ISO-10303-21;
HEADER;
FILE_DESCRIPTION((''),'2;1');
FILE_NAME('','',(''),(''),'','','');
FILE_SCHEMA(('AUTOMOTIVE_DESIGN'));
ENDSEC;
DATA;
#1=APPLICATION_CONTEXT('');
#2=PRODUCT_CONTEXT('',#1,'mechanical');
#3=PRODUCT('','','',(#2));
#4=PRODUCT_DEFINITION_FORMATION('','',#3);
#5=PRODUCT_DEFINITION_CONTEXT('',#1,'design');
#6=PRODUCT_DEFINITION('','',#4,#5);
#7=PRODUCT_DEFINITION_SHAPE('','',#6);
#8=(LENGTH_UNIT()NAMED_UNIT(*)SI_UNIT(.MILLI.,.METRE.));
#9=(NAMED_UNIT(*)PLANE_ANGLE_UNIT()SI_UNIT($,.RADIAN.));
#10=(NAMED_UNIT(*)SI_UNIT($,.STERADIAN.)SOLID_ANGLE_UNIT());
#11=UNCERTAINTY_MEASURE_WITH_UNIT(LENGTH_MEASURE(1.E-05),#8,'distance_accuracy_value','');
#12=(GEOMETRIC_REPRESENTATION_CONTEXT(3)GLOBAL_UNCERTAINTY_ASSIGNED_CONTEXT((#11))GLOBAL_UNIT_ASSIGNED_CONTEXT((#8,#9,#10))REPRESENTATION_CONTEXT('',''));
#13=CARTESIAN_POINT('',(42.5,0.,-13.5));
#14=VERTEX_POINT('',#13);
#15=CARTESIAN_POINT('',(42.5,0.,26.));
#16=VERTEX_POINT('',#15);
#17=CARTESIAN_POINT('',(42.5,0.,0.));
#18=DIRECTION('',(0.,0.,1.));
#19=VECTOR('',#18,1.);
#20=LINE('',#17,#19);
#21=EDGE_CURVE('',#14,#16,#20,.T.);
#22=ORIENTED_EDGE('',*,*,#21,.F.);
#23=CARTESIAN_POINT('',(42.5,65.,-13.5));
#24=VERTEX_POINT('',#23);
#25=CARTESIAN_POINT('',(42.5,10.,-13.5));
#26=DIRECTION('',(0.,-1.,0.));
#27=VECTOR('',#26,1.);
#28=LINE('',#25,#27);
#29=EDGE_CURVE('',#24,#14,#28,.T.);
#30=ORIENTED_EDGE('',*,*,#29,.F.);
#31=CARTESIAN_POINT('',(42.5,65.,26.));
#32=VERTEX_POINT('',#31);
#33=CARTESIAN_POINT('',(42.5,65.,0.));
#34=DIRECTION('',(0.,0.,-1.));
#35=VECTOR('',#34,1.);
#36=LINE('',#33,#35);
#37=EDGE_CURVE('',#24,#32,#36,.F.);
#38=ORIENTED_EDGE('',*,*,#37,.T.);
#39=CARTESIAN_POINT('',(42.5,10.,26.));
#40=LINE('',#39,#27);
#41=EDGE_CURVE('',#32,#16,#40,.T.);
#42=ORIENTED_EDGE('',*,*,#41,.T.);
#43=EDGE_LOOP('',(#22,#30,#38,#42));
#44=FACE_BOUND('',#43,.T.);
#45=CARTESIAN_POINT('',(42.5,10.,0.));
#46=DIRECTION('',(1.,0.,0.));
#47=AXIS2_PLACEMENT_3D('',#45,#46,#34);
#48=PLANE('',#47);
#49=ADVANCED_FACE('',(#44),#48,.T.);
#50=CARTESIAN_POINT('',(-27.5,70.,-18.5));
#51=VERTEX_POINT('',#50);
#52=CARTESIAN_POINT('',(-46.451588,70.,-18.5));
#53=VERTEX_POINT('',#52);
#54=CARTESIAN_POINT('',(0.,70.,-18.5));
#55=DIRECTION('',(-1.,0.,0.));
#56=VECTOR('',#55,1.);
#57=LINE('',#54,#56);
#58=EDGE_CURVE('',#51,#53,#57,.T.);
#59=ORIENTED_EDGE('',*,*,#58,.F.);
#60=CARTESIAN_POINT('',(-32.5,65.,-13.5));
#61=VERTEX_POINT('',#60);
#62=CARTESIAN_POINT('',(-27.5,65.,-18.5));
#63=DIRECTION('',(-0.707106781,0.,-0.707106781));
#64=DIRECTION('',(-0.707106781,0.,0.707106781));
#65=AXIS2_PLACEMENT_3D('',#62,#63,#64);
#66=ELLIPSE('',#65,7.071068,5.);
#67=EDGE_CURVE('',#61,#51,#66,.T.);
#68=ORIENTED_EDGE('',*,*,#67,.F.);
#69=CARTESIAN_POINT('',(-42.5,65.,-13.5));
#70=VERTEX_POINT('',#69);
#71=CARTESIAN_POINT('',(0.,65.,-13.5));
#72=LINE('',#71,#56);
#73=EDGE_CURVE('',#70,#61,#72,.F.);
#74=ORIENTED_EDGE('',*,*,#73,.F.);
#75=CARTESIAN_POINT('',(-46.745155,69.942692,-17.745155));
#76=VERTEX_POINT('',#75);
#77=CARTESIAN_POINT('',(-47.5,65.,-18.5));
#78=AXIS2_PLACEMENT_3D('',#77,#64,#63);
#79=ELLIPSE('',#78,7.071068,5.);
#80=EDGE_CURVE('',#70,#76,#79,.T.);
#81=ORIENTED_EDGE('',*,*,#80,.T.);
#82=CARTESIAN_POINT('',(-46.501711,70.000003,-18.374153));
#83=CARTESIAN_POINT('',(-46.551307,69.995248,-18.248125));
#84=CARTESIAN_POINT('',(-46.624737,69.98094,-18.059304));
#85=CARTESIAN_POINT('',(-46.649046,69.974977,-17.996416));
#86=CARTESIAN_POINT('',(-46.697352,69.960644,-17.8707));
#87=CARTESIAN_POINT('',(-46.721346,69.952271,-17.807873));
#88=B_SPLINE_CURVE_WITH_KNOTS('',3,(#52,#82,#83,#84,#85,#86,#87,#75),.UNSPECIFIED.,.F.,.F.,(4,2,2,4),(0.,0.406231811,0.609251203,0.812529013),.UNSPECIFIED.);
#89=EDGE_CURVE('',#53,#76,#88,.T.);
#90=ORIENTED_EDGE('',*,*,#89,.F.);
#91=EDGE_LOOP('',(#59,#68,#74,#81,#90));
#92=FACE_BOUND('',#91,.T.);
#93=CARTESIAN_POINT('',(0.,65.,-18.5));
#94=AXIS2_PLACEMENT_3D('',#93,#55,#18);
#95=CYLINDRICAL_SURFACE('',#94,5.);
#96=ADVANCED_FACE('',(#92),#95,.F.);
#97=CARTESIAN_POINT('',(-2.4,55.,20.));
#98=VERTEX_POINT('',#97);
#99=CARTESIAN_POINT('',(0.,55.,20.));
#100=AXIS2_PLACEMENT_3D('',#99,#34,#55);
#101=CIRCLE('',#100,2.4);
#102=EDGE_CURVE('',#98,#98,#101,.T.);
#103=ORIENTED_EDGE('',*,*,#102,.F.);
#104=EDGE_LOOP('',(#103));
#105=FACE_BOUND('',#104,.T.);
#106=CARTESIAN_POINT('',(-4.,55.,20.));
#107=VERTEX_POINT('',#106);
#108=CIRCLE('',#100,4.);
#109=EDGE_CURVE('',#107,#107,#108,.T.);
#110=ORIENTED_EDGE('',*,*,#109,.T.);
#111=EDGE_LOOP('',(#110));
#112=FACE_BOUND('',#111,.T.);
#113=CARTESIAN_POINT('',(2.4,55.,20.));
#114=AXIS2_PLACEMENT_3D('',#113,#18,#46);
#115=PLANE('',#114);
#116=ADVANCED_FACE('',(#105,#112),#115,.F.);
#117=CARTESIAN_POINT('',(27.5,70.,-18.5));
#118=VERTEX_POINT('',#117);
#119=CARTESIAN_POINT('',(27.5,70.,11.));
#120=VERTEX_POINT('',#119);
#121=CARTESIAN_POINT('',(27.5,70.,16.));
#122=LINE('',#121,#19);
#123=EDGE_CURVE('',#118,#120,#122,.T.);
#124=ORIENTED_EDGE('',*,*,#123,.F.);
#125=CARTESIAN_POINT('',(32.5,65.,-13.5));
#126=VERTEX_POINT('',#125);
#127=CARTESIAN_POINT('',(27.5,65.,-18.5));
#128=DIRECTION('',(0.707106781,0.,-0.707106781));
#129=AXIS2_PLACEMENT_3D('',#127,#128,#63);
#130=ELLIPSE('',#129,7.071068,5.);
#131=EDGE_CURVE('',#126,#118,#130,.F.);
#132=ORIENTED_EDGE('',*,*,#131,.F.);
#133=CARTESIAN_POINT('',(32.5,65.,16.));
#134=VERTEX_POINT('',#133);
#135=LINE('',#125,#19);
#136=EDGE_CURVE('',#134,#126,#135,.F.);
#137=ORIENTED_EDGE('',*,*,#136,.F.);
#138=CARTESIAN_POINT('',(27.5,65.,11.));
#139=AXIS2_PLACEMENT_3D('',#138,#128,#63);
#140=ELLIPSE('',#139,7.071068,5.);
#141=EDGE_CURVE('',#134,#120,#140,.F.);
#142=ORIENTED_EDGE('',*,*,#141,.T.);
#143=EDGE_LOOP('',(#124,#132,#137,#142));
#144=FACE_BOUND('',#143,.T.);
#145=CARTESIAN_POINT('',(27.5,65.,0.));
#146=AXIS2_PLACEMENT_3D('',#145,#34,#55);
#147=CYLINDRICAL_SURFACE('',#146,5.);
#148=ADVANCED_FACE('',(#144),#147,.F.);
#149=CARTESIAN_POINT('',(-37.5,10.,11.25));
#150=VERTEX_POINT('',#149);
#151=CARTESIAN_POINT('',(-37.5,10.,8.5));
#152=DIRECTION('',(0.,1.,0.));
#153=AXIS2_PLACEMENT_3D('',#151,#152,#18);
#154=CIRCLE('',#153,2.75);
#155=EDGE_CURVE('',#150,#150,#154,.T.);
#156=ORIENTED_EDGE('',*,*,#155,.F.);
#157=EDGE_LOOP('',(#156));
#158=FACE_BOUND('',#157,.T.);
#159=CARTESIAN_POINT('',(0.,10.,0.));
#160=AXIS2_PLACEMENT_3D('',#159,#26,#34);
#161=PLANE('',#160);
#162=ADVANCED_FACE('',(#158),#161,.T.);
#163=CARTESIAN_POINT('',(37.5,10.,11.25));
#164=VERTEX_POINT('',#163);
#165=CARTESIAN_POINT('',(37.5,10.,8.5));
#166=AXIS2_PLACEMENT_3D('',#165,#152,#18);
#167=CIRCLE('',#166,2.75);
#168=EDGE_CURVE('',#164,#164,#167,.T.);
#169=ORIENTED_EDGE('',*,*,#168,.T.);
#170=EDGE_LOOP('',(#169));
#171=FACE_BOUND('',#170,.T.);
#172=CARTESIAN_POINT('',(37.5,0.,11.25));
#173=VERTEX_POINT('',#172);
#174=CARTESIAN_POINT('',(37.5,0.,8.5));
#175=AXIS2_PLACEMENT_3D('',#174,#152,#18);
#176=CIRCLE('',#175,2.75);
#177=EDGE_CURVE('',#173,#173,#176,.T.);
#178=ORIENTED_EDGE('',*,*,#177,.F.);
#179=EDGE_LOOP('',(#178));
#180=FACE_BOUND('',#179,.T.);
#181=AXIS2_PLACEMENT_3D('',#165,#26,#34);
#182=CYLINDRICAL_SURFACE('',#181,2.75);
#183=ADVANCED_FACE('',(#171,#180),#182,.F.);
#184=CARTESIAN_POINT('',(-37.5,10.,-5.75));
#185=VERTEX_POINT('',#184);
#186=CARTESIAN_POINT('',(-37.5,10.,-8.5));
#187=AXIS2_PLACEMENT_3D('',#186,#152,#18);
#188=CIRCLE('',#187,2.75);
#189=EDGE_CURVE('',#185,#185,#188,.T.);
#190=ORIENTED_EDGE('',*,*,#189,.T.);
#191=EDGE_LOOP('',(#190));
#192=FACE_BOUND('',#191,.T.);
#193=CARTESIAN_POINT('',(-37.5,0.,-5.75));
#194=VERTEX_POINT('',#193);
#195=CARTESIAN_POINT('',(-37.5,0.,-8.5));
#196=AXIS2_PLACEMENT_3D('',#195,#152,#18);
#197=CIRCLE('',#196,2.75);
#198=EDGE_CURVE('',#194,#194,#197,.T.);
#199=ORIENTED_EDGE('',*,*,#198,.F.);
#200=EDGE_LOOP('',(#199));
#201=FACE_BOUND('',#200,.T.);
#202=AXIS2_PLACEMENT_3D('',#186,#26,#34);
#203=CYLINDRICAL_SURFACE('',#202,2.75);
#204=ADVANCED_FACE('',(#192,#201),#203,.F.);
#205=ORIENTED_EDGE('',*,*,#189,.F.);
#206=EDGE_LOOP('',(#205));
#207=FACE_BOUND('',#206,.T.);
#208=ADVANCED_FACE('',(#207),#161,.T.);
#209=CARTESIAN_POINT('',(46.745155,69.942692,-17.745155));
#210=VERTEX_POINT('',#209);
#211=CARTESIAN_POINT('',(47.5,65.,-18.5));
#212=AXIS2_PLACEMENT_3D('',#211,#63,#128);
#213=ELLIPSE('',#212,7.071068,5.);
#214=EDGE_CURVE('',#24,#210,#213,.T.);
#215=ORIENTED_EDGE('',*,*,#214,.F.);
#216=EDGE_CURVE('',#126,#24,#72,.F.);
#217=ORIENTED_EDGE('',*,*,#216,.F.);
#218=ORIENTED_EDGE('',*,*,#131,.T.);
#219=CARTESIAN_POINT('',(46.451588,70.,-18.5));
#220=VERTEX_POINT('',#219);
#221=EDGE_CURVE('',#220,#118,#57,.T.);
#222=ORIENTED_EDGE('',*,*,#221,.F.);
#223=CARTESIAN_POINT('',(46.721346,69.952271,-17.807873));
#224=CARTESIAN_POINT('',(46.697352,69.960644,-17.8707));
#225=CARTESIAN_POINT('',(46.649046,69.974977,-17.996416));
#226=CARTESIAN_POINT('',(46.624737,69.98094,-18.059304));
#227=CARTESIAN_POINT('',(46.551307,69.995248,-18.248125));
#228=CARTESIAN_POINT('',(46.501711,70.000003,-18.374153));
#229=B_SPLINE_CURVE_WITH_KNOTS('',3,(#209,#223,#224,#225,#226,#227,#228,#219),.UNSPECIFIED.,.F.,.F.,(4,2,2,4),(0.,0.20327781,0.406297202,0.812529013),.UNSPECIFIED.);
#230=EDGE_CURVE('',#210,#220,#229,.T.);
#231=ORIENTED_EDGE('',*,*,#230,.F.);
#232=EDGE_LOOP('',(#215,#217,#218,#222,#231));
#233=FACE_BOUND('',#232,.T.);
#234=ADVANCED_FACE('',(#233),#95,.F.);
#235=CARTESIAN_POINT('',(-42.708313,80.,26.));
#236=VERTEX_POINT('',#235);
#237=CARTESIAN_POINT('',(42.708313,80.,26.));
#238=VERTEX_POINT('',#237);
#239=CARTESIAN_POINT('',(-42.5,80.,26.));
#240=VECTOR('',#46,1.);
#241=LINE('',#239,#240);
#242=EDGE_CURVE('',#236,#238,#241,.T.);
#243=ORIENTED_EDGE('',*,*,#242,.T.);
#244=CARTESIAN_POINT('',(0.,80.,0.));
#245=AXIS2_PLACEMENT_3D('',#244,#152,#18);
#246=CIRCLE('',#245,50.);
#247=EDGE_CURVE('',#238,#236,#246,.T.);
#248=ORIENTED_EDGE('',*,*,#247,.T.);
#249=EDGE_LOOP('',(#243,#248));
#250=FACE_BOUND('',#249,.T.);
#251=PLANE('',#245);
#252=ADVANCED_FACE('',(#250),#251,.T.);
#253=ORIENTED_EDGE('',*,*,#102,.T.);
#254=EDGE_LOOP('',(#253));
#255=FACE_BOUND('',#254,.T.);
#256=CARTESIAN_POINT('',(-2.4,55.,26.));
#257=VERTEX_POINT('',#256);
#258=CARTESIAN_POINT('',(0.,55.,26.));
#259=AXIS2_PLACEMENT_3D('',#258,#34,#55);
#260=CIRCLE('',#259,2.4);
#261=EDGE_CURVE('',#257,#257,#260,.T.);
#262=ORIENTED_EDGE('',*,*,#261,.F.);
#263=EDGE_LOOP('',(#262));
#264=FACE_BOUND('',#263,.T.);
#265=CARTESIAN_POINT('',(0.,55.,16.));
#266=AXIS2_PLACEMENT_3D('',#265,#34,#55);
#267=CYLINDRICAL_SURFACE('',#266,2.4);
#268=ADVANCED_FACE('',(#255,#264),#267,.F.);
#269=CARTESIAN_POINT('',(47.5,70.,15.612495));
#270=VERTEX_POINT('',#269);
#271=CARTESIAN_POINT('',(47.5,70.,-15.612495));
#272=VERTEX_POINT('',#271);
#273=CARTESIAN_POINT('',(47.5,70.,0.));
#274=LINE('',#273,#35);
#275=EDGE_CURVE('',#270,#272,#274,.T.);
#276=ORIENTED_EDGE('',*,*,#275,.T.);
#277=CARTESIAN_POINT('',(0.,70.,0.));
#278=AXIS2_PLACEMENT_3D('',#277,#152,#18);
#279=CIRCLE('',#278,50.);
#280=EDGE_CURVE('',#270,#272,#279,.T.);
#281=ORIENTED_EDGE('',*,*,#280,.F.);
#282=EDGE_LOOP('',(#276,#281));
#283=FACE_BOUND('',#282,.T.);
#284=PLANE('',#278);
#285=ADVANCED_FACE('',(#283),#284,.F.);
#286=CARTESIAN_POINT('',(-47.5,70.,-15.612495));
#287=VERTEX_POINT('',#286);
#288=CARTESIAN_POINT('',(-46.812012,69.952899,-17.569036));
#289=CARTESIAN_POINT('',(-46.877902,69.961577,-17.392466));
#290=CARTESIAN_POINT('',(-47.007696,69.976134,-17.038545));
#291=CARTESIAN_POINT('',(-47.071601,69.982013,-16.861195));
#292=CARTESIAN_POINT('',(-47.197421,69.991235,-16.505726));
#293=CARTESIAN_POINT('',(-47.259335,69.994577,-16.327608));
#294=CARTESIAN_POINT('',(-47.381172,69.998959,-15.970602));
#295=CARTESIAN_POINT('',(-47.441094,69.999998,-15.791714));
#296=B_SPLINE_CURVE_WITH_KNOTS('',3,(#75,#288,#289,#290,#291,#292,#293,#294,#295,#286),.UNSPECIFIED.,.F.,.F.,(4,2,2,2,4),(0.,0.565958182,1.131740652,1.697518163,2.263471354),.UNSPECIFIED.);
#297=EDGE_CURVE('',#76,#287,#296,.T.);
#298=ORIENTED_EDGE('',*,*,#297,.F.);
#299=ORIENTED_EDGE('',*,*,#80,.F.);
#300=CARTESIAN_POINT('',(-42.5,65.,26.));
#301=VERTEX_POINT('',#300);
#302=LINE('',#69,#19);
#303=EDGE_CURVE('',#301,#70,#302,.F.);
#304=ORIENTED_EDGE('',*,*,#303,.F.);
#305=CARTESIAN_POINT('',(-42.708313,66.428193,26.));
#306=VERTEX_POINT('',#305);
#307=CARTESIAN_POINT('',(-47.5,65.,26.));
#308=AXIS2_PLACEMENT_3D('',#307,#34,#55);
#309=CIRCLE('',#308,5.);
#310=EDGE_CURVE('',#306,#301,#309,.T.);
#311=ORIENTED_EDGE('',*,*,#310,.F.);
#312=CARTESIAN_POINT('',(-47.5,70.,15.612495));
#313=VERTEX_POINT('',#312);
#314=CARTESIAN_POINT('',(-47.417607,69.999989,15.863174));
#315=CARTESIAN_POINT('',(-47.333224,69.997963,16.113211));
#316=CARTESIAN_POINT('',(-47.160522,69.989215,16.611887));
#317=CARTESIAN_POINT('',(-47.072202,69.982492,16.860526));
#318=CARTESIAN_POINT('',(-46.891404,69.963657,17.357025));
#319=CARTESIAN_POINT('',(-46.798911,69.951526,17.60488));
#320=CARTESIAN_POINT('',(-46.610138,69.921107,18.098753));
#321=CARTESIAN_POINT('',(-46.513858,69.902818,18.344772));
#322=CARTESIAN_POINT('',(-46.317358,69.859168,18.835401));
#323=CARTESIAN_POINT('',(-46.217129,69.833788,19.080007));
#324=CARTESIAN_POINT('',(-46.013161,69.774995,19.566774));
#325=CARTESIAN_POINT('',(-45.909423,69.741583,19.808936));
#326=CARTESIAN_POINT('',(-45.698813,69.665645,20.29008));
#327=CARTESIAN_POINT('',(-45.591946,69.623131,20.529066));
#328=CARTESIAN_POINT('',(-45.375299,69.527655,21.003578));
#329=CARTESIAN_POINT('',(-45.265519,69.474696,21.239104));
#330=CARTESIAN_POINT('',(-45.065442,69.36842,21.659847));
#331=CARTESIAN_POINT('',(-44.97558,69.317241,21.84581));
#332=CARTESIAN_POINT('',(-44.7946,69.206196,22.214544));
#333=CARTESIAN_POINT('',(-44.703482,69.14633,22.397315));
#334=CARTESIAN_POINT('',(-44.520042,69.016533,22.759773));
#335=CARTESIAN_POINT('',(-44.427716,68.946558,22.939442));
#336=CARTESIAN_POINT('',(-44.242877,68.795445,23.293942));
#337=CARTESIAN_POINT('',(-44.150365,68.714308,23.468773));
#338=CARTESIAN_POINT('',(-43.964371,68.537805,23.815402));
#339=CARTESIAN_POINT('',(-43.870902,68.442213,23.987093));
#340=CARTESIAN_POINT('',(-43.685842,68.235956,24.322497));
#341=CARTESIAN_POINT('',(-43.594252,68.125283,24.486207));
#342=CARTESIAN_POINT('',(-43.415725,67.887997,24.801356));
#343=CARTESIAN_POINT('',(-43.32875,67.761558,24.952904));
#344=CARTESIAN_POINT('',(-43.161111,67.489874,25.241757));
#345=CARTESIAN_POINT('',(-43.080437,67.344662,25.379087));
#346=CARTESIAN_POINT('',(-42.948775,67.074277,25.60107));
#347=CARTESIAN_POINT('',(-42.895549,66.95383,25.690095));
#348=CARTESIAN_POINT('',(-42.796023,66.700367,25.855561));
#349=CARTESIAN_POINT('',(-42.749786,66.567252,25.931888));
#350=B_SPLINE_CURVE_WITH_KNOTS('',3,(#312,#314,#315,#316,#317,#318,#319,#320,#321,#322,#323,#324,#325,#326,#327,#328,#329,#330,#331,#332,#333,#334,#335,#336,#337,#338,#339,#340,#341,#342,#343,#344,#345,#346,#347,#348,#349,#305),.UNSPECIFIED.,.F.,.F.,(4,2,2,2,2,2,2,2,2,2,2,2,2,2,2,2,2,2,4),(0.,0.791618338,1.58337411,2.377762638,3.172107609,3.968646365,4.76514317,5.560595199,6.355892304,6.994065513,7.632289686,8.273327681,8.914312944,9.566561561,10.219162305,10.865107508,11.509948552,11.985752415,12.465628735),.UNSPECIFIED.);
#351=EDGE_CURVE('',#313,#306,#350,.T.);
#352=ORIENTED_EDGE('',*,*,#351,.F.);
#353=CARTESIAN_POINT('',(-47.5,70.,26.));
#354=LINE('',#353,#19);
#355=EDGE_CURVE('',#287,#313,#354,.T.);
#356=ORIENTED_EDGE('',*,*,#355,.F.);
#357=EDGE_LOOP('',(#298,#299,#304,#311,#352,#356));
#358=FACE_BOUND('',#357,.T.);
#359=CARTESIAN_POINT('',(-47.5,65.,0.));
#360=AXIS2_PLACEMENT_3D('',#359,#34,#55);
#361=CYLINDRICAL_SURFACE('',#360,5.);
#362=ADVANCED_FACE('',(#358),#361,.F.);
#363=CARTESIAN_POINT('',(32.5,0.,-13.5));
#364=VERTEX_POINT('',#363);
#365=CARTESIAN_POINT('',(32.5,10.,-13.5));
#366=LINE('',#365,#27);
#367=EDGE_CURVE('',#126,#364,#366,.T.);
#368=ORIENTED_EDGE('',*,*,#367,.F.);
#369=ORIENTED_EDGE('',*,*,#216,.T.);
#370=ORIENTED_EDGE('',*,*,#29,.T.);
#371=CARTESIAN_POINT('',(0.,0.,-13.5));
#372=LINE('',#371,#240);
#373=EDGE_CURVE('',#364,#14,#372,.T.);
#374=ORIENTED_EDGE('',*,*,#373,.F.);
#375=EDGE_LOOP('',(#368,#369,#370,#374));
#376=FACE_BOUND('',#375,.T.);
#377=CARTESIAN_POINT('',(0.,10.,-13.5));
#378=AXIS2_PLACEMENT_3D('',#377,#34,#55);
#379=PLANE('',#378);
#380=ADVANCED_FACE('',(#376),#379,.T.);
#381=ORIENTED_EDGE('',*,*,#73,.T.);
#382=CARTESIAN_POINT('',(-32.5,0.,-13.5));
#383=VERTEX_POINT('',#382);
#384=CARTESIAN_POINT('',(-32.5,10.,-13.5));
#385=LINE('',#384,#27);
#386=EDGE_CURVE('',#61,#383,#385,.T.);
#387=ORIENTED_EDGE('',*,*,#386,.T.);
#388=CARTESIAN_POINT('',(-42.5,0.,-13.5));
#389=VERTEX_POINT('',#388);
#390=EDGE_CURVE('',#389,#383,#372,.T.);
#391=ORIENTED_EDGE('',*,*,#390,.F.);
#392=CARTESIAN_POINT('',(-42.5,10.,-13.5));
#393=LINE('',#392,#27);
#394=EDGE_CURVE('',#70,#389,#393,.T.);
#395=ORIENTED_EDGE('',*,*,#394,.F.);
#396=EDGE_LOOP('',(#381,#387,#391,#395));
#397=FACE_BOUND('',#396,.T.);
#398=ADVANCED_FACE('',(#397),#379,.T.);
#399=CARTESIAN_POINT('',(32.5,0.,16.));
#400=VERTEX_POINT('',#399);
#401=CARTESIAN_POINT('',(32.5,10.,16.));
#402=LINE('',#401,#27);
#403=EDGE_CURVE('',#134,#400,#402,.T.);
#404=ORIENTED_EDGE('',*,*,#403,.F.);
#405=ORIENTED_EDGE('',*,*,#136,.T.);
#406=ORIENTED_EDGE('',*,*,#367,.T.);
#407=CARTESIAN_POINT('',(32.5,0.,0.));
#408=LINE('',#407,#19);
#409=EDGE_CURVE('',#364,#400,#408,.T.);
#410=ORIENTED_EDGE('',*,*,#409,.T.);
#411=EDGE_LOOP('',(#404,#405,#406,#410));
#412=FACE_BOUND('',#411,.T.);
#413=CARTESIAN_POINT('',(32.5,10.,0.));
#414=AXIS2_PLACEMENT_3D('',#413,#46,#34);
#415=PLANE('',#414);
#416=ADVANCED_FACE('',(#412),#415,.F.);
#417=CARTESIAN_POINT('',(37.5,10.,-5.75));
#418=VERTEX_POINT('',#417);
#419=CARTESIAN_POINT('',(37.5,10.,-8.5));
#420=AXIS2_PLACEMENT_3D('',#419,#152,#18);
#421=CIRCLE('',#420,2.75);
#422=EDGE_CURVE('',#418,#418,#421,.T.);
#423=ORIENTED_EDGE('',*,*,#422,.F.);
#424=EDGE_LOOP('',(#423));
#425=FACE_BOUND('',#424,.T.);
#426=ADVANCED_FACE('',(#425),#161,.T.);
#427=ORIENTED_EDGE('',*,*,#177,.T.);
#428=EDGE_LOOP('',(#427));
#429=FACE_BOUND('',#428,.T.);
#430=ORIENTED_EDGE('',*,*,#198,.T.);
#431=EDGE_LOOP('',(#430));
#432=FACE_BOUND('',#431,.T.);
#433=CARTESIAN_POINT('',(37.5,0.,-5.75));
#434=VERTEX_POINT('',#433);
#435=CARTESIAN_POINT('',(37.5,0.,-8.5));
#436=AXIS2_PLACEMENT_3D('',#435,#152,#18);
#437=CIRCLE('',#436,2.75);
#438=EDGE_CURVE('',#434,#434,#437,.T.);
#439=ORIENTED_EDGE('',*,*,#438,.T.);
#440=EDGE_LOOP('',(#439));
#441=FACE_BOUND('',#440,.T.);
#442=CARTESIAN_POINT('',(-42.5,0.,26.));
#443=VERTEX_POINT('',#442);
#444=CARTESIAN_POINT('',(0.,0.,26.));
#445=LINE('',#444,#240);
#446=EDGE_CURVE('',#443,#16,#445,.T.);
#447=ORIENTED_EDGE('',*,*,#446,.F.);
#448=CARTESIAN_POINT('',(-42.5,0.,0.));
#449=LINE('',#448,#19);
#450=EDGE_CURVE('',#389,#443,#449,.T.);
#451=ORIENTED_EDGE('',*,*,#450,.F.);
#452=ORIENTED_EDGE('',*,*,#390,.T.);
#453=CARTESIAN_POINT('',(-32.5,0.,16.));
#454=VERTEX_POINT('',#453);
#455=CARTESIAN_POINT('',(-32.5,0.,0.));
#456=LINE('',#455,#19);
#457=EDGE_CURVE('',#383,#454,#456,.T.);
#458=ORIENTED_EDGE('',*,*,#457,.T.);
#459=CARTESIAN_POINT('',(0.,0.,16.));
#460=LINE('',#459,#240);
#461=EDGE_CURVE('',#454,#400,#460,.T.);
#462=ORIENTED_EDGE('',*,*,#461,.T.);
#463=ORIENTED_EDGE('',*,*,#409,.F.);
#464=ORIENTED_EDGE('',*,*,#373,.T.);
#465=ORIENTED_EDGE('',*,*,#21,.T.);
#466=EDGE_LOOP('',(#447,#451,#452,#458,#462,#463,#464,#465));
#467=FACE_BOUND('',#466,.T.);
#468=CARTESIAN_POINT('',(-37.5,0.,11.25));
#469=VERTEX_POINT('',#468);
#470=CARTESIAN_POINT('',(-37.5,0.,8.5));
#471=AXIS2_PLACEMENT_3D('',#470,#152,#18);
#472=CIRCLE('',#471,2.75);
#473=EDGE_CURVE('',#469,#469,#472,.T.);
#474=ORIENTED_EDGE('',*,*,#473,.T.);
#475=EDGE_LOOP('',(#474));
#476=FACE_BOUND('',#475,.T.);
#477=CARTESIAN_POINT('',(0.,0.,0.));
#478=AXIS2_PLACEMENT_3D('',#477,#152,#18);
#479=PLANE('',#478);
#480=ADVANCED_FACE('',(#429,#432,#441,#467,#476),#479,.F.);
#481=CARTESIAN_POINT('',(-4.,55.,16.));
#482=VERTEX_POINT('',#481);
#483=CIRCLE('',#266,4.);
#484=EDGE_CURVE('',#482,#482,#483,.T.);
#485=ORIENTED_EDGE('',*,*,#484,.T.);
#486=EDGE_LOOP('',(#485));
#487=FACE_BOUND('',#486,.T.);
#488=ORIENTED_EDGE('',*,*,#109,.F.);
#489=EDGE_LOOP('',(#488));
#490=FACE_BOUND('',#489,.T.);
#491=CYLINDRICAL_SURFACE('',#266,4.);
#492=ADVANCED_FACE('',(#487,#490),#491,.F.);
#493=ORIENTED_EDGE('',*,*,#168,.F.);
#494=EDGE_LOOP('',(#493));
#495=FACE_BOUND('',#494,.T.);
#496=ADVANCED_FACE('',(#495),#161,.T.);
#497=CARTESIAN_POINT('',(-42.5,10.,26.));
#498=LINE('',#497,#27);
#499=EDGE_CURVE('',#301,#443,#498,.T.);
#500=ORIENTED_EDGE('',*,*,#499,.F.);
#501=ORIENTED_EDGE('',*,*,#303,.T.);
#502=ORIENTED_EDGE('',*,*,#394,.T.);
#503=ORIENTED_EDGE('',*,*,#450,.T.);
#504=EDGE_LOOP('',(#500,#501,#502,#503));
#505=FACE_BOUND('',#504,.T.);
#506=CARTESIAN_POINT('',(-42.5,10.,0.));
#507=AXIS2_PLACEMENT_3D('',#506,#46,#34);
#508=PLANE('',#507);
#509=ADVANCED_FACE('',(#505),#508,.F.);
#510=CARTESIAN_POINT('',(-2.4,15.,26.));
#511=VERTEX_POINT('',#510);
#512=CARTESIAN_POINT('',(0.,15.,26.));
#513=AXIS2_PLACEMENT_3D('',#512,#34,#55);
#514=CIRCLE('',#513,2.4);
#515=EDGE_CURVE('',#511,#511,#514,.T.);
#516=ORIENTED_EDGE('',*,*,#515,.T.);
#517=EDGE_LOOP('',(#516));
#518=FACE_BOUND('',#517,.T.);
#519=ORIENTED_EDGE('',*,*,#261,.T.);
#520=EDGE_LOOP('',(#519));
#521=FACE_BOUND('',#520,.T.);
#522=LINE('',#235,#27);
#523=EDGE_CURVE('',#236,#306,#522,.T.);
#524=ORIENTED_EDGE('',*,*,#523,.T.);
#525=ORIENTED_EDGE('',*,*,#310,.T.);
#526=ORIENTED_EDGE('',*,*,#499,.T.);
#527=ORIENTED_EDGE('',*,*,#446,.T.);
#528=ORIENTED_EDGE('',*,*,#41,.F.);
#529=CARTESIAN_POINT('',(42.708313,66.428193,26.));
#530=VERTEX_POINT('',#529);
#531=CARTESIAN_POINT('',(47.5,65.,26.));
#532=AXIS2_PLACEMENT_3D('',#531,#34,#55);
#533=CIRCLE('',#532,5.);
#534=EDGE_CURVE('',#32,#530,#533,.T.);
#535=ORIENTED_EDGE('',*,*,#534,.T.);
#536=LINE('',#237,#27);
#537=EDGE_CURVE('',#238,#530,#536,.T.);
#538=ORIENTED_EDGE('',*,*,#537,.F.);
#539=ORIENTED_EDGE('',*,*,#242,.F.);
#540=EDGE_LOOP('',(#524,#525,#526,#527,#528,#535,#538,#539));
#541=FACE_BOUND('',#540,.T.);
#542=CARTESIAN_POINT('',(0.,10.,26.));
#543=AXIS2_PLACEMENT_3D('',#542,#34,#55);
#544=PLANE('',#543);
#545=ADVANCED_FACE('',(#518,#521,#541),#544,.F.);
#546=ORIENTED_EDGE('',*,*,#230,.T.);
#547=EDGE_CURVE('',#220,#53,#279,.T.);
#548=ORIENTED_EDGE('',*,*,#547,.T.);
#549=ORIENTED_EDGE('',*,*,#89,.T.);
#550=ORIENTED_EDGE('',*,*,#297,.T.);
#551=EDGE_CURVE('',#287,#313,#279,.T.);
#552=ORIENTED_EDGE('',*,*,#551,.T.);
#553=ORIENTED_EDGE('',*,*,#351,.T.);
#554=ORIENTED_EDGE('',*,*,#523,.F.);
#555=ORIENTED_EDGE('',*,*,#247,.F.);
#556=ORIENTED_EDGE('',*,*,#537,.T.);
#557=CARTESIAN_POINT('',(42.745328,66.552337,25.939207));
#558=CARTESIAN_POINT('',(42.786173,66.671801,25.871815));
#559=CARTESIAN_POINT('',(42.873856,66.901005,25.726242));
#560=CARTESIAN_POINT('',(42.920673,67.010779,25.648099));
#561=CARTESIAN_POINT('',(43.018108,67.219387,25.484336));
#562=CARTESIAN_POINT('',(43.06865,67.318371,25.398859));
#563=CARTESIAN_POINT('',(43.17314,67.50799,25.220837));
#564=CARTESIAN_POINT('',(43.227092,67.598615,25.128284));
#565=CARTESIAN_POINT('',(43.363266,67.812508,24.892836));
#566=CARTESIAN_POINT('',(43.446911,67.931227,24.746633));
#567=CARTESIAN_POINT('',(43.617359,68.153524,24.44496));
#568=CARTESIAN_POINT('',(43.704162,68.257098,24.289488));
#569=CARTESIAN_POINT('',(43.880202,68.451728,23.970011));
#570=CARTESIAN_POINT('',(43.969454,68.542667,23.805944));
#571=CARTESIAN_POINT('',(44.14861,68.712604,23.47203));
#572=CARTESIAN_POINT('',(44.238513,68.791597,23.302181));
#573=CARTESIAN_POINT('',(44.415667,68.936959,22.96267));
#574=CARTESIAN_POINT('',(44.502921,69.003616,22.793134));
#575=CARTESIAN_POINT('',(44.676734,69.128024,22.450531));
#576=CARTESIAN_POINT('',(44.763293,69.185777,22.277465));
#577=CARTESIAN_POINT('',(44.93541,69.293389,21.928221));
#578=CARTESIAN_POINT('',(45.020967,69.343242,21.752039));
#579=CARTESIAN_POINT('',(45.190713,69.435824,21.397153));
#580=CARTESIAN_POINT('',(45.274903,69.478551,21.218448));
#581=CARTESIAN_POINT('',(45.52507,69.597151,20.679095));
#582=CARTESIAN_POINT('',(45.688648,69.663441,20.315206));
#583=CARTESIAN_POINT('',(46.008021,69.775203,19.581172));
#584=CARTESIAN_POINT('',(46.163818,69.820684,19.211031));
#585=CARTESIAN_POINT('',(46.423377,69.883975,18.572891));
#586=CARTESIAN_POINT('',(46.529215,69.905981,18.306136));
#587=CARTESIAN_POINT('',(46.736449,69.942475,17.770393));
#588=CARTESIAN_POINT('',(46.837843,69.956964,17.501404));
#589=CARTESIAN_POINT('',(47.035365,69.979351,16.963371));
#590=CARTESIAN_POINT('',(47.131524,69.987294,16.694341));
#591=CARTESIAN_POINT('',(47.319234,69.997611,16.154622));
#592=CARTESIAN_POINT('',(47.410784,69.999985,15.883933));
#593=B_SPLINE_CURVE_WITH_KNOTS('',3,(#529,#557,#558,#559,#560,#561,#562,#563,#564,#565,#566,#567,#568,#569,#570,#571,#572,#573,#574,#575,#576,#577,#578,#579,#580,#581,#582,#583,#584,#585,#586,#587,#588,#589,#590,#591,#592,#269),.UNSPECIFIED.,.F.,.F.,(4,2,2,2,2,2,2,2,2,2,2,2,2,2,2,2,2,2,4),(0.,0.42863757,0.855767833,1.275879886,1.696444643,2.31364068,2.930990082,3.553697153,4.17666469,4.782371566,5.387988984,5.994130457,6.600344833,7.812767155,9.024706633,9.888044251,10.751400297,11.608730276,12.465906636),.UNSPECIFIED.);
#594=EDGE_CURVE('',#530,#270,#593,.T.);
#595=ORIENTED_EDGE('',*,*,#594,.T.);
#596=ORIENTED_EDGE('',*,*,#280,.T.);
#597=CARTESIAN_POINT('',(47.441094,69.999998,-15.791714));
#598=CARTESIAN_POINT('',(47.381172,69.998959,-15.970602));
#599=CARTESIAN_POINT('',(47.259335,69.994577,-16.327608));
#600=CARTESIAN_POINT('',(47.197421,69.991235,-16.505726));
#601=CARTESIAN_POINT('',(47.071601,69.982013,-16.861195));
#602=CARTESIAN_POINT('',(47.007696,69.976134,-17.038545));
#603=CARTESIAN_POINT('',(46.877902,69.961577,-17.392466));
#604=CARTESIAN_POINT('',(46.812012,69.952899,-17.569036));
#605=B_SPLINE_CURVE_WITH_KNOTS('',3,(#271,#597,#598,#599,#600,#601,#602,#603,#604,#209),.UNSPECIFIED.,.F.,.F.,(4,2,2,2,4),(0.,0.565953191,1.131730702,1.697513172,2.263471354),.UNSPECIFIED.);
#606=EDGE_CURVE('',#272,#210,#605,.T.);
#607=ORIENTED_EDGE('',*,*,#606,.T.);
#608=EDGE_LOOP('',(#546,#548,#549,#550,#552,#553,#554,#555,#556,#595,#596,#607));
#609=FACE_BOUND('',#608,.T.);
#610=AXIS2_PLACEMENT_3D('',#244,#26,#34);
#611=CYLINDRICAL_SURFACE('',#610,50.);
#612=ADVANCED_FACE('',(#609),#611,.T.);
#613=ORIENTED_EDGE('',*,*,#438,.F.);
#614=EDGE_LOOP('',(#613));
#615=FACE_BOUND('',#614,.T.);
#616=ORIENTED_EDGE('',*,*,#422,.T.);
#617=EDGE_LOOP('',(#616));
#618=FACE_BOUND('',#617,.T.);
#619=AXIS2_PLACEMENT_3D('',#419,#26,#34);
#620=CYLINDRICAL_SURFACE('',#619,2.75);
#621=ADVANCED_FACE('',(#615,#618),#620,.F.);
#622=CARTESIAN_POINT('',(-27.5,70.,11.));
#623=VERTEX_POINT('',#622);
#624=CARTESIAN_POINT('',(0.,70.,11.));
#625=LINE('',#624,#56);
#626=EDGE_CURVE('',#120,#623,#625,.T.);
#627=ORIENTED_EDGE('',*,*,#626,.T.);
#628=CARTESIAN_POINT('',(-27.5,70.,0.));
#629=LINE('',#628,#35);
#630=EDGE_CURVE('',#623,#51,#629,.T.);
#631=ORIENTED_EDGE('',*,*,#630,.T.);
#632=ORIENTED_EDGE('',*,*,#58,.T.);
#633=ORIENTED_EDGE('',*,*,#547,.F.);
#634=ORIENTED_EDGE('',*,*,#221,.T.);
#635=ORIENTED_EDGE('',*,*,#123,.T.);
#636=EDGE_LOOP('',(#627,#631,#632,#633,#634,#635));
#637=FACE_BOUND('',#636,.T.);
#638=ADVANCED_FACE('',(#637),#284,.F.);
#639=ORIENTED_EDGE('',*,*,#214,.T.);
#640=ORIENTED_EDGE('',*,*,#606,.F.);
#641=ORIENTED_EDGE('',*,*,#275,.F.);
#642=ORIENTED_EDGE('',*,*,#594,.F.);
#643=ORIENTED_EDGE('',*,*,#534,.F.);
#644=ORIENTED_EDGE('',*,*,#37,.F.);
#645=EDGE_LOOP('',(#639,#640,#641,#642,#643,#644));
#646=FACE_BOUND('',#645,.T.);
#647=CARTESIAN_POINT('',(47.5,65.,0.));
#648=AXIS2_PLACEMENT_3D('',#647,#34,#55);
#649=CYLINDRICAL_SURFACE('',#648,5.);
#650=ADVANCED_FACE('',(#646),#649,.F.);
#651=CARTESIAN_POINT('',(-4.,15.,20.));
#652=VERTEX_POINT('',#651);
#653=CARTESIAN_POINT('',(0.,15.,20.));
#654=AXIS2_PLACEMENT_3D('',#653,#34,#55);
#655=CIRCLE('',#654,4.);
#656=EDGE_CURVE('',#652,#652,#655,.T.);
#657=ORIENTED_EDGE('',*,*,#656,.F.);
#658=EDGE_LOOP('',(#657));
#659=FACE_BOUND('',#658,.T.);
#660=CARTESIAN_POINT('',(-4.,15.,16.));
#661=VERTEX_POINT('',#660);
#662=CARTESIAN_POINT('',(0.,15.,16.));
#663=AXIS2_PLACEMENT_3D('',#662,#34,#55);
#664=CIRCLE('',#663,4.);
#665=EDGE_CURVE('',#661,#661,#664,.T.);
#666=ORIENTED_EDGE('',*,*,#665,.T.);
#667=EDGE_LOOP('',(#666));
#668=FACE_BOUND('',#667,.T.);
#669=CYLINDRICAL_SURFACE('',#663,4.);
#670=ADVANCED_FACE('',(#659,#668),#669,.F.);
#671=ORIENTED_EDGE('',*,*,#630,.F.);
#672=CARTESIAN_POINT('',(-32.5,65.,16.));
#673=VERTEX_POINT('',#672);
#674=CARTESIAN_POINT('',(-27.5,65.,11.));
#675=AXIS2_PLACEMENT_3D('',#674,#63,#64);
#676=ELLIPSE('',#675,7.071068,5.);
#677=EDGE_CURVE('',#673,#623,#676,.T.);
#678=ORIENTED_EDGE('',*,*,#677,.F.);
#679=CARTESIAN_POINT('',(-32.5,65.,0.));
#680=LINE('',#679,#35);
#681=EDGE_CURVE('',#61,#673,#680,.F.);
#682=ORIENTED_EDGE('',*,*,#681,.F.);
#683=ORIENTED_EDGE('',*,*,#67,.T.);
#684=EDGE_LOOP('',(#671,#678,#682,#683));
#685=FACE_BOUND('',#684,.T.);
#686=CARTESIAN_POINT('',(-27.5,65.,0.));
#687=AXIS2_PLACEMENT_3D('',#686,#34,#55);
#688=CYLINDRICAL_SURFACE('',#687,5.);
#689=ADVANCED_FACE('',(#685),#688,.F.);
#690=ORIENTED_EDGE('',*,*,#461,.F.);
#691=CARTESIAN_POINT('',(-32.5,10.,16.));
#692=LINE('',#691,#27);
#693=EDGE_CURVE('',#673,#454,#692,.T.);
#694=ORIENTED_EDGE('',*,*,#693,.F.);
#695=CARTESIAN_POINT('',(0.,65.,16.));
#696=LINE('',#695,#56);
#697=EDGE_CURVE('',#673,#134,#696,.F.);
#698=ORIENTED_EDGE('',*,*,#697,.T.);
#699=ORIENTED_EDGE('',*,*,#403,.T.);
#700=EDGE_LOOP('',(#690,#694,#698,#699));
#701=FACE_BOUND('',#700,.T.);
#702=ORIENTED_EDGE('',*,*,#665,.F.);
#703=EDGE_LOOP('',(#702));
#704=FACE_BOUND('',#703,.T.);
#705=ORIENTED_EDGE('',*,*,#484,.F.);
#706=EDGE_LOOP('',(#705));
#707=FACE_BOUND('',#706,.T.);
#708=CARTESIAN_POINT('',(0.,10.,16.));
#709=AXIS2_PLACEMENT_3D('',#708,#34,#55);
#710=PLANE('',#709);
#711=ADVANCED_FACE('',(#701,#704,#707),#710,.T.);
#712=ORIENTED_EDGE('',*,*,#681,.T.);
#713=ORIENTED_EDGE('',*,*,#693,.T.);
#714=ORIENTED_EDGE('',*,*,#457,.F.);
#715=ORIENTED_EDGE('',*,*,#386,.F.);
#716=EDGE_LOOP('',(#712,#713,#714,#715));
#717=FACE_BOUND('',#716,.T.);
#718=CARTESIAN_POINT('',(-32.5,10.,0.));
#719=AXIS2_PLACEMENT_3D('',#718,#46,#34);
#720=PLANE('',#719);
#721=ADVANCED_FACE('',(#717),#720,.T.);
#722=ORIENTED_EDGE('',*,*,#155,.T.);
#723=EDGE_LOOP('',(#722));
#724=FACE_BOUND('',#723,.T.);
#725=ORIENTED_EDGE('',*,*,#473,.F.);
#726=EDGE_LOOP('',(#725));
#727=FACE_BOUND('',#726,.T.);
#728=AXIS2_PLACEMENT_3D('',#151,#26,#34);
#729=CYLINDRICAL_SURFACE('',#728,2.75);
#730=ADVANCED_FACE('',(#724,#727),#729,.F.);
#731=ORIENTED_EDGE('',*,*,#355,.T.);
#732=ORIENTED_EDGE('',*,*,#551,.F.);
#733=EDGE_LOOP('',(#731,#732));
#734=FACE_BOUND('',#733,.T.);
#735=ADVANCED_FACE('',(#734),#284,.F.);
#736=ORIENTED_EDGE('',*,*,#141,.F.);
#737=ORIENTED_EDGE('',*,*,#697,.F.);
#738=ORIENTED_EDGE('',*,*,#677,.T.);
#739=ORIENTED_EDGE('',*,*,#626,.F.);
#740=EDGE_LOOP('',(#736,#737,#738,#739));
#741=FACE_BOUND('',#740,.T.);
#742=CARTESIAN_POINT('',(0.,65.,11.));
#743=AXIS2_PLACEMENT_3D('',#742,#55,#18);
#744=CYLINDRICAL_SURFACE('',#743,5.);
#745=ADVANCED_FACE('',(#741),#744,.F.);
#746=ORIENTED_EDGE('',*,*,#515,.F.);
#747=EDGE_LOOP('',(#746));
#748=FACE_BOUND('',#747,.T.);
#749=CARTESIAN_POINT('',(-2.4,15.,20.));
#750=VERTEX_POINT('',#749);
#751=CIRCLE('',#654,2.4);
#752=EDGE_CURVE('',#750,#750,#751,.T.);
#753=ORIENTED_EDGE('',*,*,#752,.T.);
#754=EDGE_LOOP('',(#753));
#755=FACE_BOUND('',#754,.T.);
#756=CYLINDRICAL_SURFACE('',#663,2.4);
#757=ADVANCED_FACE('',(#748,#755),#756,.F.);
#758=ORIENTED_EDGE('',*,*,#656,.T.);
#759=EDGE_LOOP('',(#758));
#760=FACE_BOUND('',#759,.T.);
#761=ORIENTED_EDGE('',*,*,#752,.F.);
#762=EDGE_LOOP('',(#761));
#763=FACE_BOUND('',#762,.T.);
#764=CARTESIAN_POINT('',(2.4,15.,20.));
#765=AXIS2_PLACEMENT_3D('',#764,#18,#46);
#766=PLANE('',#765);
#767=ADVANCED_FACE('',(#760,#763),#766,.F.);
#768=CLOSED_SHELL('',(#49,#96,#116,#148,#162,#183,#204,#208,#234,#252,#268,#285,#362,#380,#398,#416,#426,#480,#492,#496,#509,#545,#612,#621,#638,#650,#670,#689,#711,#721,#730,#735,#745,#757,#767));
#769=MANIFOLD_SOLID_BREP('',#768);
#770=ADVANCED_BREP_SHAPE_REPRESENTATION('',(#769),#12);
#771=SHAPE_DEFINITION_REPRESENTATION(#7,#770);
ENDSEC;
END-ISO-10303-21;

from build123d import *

# Parameters (mm, degrees)
SKETCH1_W                      = 10
SKETCH1_H                      = 29.5
SKETCH1_R                      = 2.75
BOSS_EXTRUDE1_DEPTH            = 10
BOSS_EXTRUDE4_DEPTH            = 60
BOSS_EXTRUDE5_DEPTH            = 10
FILLET2_R                      = 5
CBORE_FOR_M4_SHCS2_D           = 4.8
CBORE_FOR_M4_SHCS2_CBORE_D     = 8
CBORE_FOR_M4_SHCS2_CBORE_DEPTH = 4


with BuildPart() as part:
    # Sketch1 → Boss-Extrude1 (new body)
    # profile 1 of 3: a face of its own
    with BuildSketch(Plane(origin=(0, 0, 0), x_dir=(1, 0, 0), z_dir=(0, 1, 0))):
        with Locations((-37.5, -1.25)):
            Rectangle(SKETCH1_W, SKETCH1_H)
        with Locations(Location((-37.5, -8.5, 0), (0, 0, 270))):
            Circle(SKETCH1_R, mode=Mode.SUBTRACT)
        with Locations(Location((-37.5, 8.5, 0), (0, 0, 270))):
            Circle(SKETCH1_R, mode=Mode.SUBTRACT)
    # profile 2 of 3: a face of its own
    with BuildSketch(Plane(origin=(0, 0, 0), x_dir=(1, 0, 0), z_dir=(0, 1, 0))):
        Polygon((-32.5, -16), (-42.5, -16), (-42.5, -26), (42.5, -26), (42.5, -16), (32.5, -16), align=None)
    # profile 3 of 3: a face of its own
    with BuildSketch(Plane(origin=(0, 0, 0), x_dir=(1, 0, 0), z_dir=(0, 1, 0))):
        with Locations((37.5, -1.25)):
            Rectangle(SKETCH1_W, SKETCH1_H)
        with Locations(Location((37.5, -8.5, 0), (0, 0, 270))):
            Circle(SKETCH1_R, mode=Mode.SUBTRACT)
        with Locations(Location((37.5, 8.5, 0), (0, 0, 270))):
            Circle(SKETCH1_R, mode=Mode.SUBTRACT)
    extrude(amount=BOSS_EXTRUDE1_DEPTH)

    # Sketch6 → Boss-Extrude4 (add)
    with BuildSketch(Plane(origin=(0, 10, 0), x_dir=(1, 0, 0), z_dir=(0, 1, 0))):
        Polygon((-32.5, -16), (-32.5, 13.5), (-42.5, 13.5), (-42.5, -26), (42.5, -26), (42.5, 13.5), (32.5, 13.5), (32.5, -16), align=None)
    extrude(amount=BOSS_EXTRUDE4_DEPTH)

    # Sketch7 → Boss-Extrude5 (add)
    with BuildSketch(Plane(origin=(0, 70, 0), x_dir=(1, 0, 0), z_dir=(0, 1, 0))):
        with BuildLine():
            Line((-42.5, -26), (42.5, -26))
            Line((42.5, -26), (42.708313008, -26))
            ThreePointArc((42.708313008, -26), (0, 50), (-42.708313008, -26))
            Line((-42.708313008, -26), (-42.5, -26))
        make_face()
    extrude(amount=BOSS_EXTRUDE5_DEPTH)

    # Fillet2
    # the kernel refuses this fillet: 5 mm, written as the material it adds along each edge
    with BuildSketch(Plane(origin=(42.5, 70, 26), x_dir=(1, 0, 0), z_dir=(0, 0, -1))) as fillet2_piece_1_section:
        with BuildLine():
            CenterArc((FILLET2_R, FILLET2_R), FILLET2_R, 180, 90)
            Line((0, FILLET2_R), (-FILLET2_R * 0.02, FILLET2_R))
            Line((-FILLET2_R * 0.02, FILLET2_R), (-FILLET2_R * 0.02, -FILLET2_R * 0.02))
            Line((-FILLET2_R * 0.02, -FILLET2_R * 0.02), (FILLET2_R, -FILLET2_R * 0.02))
            Line((FILLET2_R, -FILLET2_R * 0.02), (FILLET2_R, 0))
        make_face()
    fillet2_piece_1 = extrude(amount=39.5, mode=Mode.PRIVATE)
    fillet2_piece_1 = fillet2_piece_1 & Plane(origin=(0, 68.835749357, 0), x_dir=(0.8541662601625051, 0, 0.5199999999999999), z_dir=(0, -1, 0)) * Cylinder(50, 100, mode=Mode.PRIVATE)
    add(fillet2_piece_1)
    with BuildSketch(Plane(origin=(42.5, 70, -13.5), x_dir=(0, 0, -1), z_dir=(-1, 0, 0)), Plane(origin=(-32.5, 70, -13.5), x_dir=(0, 0, -1), z_dir=(-1, 0, 0))) as fillet2_piece_2:
        with BuildLine():
            CenterArc((FILLET2_R, FILLET2_R), FILLET2_R, 180, 90)
            Line((0, FILLET2_R), (-FILLET2_R * 0.02, FILLET2_R))
            Line((-FILLET2_R * 0.02, FILLET2_R), (-FILLET2_R * 0.02, -FILLET2_R * 0.02))
            Line((-FILLET2_R * 0.02, -FILLET2_R * 0.02), (FILLET2_R, -FILLET2_R * 0.02))
            Line((FILLET2_R, -FILLET2_R * 0.02), (FILLET2_R, 0))
        make_face()
    extrude(amount=10)
    with BuildSketch(Plane(origin=(32.5, 70, -13.5), x_dir=(-1, 0, 0), z_dir=(0, 0, 1)), Plane(origin=(-32.5, 70, 16), x_dir=(1, 0, 0), z_dir=(0, 0, -1))) as fillet2_piece_3:
        with BuildLine():
            CenterArc((FILLET2_R, FILLET2_R), FILLET2_R, 180, 90)
            Line((0, FILLET2_R), (-FILLET2_R * 0.02, FILLET2_R))
            Line((-FILLET2_R * 0.02, FILLET2_R), (-FILLET2_R * 0.02, -FILLET2_R * 0.02))
            Line((-FILLET2_R * 0.02, -FILLET2_R * 0.02), (FILLET2_R, -FILLET2_R * 0.02))
            Line((FILLET2_R, -FILLET2_R * 0.02), (FILLET2_R, 0))
        make_face()
    extrude(amount=29.5)
    with BuildSketch(Plane(origin=(32.5, 70, 16), x_dir=(0, 0, -1), z_dir=(-1, 0, 0))) as fillet2_piece_4:
        with BuildLine():
            CenterArc((FILLET2_R, FILLET2_R), FILLET2_R, 180, 90)
            Line((0, FILLET2_R), (-FILLET2_R * 0.02, FILLET2_R))
            Line((-FILLET2_R * 0.02, FILLET2_R), (-FILLET2_R * 0.02, -FILLET2_R * 0.02))
            Line((-FILLET2_R * 0.02, -FILLET2_R * 0.02), (FILLET2_R, -FILLET2_R * 0.02))
            Line((FILLET2_R, -FILLET2_R * 0.02), (FILLET2_R, 0))
        make_face()
    extrude(amount=65)
    with BuildSketch(Plane(origin=(-42.5, 70, -13.5), x_dir=(-1, 0, 0), z_dir=(0, 0, 1))) as fillet2_piece_5_section:
        with BuildLine():
            CenterArc((FILLET2_R, FILLET2_R), FILLET2_R, 180, 90)
            Line((0, FILLET2_R), (-FILLET2_R * 0.02, FILLET2_R))
            Line((-FILLET2_R * 0.02, FILLET2_R), (-FILLET2_R * 0.02, -FILLET2_R * 0.02))
            Line((-FILLET2_R * 0.02, -FILLET2_R * 0.02), (FILLET2_R, -FILLET2_R * 0.02))
            Line((FILLET2_R, -FILLET2_R * 0.02), (FILLET2_R, 0))
        make_face()
    fillet2_piece_5 = extrude(amount=39.5, mode=Mode.PRIVATE)
    fillet2_piece_5 = fillet2_piece_5 & Plane(origin=(0, 68.835749403, 0), x_dir=(0.8541662601625051, 0, 0.5199999999999999), z_dir=(0, -1, 0)) * Cylinder(50, 100, mode=Mode.PRIVATE)
    add(fillet2_piece_5)
    with BuildSketch(Plane(origin=(42.5, 70, 26), x_dir=(1, 0, 0), z_dir=(0, 0, -1))) as fillet2_piece_6a_section:
        with BuildLine():
            CenterArc((FILLET2_R, FILLET2_R), FILLET2_R, 180, 90)
            Line((0, FILLET2_R), (-FILLET2_R * 0.02, FILLET2_R))
            Line((-FILLET2_R * 0.02, FILLET2_R), (-FILLET2_R * 0.02, -FILLET2_R * 0.02))
            Line((-FILLET2_R * 0.02, -FILLET2_R * 0.02), (FILLET2_R, -FILLET2_R * 0.02))
            Line((FILLET2_R, -FILLET2_R * 0.02), (FILLET2_R, 0))
        make_face()
    fillet2_piece_6a = extrude(amount=52, mode=Mode.PRIVATE)
    fillet2_piece_6a = fillet2_piece_6a & Plane(origin=(0, 68.754666654, 0), x_dir=(0.8541662601625051, 0, 0.5199999999999999), z_dir=(0, -1, 0)) * Cylinder(50, 125, mode=Mode.PRIVATE)
    fillet2_piece_6a = split(fillet2_piece_6a, bisect_by=Plane(origin=(43.429472086, 68.754666654, -13.5), z_dir=(0, 0, -1)), keep=Keep.TOP, mode=Mode.PRIVATE)
    with BuildSketch(Plane(origin=(55, 70, -13.5), x_dir=(0, 0, -1), z_dir=(-1, 0, 0))) as fillet2_piece_6b_section:
        with BuildLine():
            CenterArc((FILLET2_R, FILLET2_R), FILLET2_R, 180, 90)
            Line((0, FILLET2_R), (-FILLET2_R * 0.02, FILLET2_R))
            Line((-FILLET2_R * 0.02, FILLET2_R), (-FILLET2_R * 0.02, -FILLET2_R * 0.02))
            Line((-FILLET2_R * 0.02, -FILLET2_R * 0.02), (FILLET2_R, -FILLET2_R * 0.02))
            Line((FILLET2_R, -FILLET2_R * 0.02), (FILLET2_R, 0))
        make_face()
    fillet2_piece_6b = extrude(amount=22.5, mode=Mode.PRIVATE)
    fillet2_piece_6b = fillet2_piece_6b & Plane(origin=(0, 68.82733242, 0), x_dir=(0.8541662601625051, 0, 0.5199999999999999), z_dir=(0, -1, 0)) * Cylinder(50, 65, mode=Mode.PRIVATE)
    fillet2_piece_6b = split(fillet2_piece_6b, bisect_by=Plane(origin=(42.5, 68.82733242, -14.561731355), z_dir=(1, 0, 0)), keep=Keep.TOP, mode=Mode.PRIVATE)
    fillet2_piece_6 = fillet2_piece_6a & fillet2_piece_6b
    add(fillet2_piece_6)
    with BuildSketch(Plane(origin=(42.5, 70, -13.5), x_dir=(0, 0, -1), z_dir=(-1, 0, 0))) as fillet2_piece_7a_section:
        with BuildLine():
            CenterArc((FILLET2_R, FILLET2_R), FILLET2_R, 180, 90)
            Line((0, FILLET2_R), (-FILLET2_R * 0.02, FILLET2_R))
            Line((-FILLET2_R * 0.02, FILLET2_R), (-FILLET2_R * 0.02, -FILLET2_R * 0.02))
            Line((-FILLET2_R * 0.02, -FILLET2_R * 0.02), (FILLET2_R, -FILLET2_R * 0.02))
            Line((FILLET2_R, -FILLET2_R * 0.02), (FILLET2_R, 0))
        make_face()
    fillet2_piece_7a = extrude(amount=22.5, mode=Mode.PRIVATE)
    fillet2_piece_7a = split(fillet2_piece_7a, bisect_by=Plane(origin=(32.5, 68.868024429, -14.631975571), z_dir=(-1, 0, 0)), keep=Keep.TOP, mode=Mode.PRIVATE)
    with BuildSketch(Plane(origin=(32.5, 70, -26), x_dir=(-1, 0, 0), z_dir=(0, 0, 1))) as fillet2_piece_7b_section:
        with BuildLine():
            CenterArc((FILLET2_R, FILLET2_R), FILLET2_R, 180, 90)
            Line((0, FILLET2_R), (-FILLET2_R * 0.02, FILLET2_R))
            Line((-FILLET2_R * 0.02, FILLET2_R), (-FILLET2_R * 0.02, -FILLET2_R * 0.02))
            Line((-FILLET2_R * 0.02, -FILLET2_R * 0.02), (FILLET2_R, -FILLET2_R * 0.02))
            Line((FILLET2_R, -FILLET2_R * 0.02), (FILLET2_R, 0))
        make_face()
    fillet2_piece_7b = extrude(amount=42, mode=Mode.PRIVATE)
    fillet2_piece_7b = split(fillet2_piece_7b, bisect_by=Plane(origin=(31.368024429, 68.868024429, -13.5), z_dir=(0, 0, -1)), keep=Keep.TOP, mode=Mode.PRIVATE)
    fillet2_piece_7 = fillet2_piece_7a & fillet2_piece_7b
    add(fillet2_piece_7)
    with BuildSketch(Plane(origin=(32.5, 70, -13.5), x_dir=(-1, 0, 0), z_dir=(0, 0, 1))) as fillet2_piece_8a_section:
        with BuildLine():
            CenterArc((FILLET2_R, FILLET2_R), FILLET2_R, 180, 90)
            Line((0, FILLET2_R), (-FILLET2_R * 0.02, FILLET2_R))
            Line((-FILLET2_R * 0.02, FILLET2_R), (-FILLET2_R * 0.02, -FILLET2_R * 0.02))
            Line((-FILLET2_R * 0.02, -FILLET2_R * 0.02), (FILLET2_R, -FILLET2_R * 0.02))
            Line((FILLET2_R, -FILLET2_R * 0.02), (FILLET2_R, 0))
        make_face()
    fillet2_piece_8a = extrude(amount=42, mode=Mode.PRIVATE)
    fillet2_piece_8a = split(fillet2_piece_8a, bisect_by=Plane(origin=(31.368024429, 68.868024429, 16), z_dir=(0, 0, 1)), keep=Keep.TOP, mode=Mode.PRIVATE)
    with BuildSketch(Plane(origin=(45, 70, 16), x_dir=(0, 0, -1), z_dir=(-1, 0, 0))) as fillet2_piece_8b_section:
        with BuildLine():
            CenterArc((FILLET2_R, FILLET2_R), FILLET2_R, 180, 90)
            Line((0, FILLET2_R), (-FILLET2_R * 0.02, FILLET2_R))
            Line((-FILLET2_R * 0.02, FILLET2_R), (-FILLET2_R * 0.02, -FILLET2_R * 0.02))
            Line((-FILLET2_R * 0.02, -FILLET2_R * 0.02), (FILLET2_R, -FILLET2_R * 0.02))
            Line((FILLET2_R, -FILLET2_R * 0.02), (FILLET2_R, 0))
        make_face()
    fillet2_piece_8b = extrude(amount=77.5, mode=Mode.PRIVATE)
    fillet2_piece_8b = split(fillet2_piece_8b, bisect_by=Plane(origin=(32.5, 68.868024429, 14.868024429), z_dir=(1, 0, 0)), keep=Keep.TOP, mode=Mode.PRIVATE)
    fillet2_piece_8 = fillet2_piece_8a & fillet2_piece_8b
    add(fillet2_piece_8)
    with BuildSketch(Plane(origin=(32.5, 70, 16), x_dir=(0, 0, -1), z_dir=(-1, 0, 0))) as fillet2_piece_9a_section:
        with BuildLine():
            CenterArc((FILLET2_R, FILLET2_R), FILLET2_R, 180, 90)
            Line((0, FILLET2_R), (-FILLET2_R * 0.02, FILLET2_R))
            Line((-FILLET2_R * 0.02, FILLET2_R), (-FILLET2_R * 0.02, -FILLET2_R * 0.02))
            Line((-FILLET2_R * 0.02, -FILLET2_R * 0.02), (FILLET2_R, -FILLET2_R * 0.02))
            Line((FILLET2_R, -FILLET2_R * 0.02), (FILLET2_R, 0))
        make_face()
    fillet2_piece_9a = extrude(amount=77.5, mode=Mode.PRIVATE)
    fillet2_piece_9a = split(fillet2_piece_9a, bisect_by=Plane(origin=(-32.5, 68.868024429, 14.868024429), z_dir=(-1, 0, 0)), keep=Keep.TOP, mode=Mode.PRIVATE)
    with BuildSketch(Plane(origin=(-32.5, 70, 28.5), x_dir=(1, 0, 0), z_dir=(0, 0, -1))) as fillet2_piece_9b_section:
        with BuildLine():
            CenterArc((FILLET2_R, FILLET2_R), FILLET2_R, 180, 90)
            Line((0, FILLET2_R), (-FILLET2_R * 0.02, FILLET2_R))
            Line((-FILLET2_R * 0.02, FILLET2_R), (-FILLET2_R * 0.02, -FILLET2_R * 0.02))
            Line((-FILLET2_R * 0.02, -FILLET2_R * 0.02), (FILLET2_R, -FILLET2_R * 0.02))
            Line((FILLET2_R, -FILLET2_R * 0.02), (FILLET2_R, 0))
        make_face()
    fillet2_piece_9b = extrude(amount=42, mode=Mode.PRIVATE)
    fillet2_piece_9b = split(fillet2_piece_9b, bisect_by=Plane(origin=(-31.368024429, 68.868024429, 16), z_dir=(0, 0, 1)), keep=Keep.TOP, mode=Mode.PRIVATE)
    fillet2_piece_9 = fillet2_piece_9a & fillet2_piece_9b
    add(fillet2_piece_9)
    with BuildSketch(Plane(origin=(-32.5, 70, 16), x_dir=(1, 0, 0), z_dir=(0, 0, -1))) as fillet2_piece_10a_section:
        with BuildLine():
            CenterArc((FILLET2_R, FILLET2_R), FILLET2_R, 180, 90)
            Line((0, FILLET2_R), (-FILLET2_R * 0.02, FILLET2_R))
            Line((-FILLET2_R * 0.02, FILLET2_R), (-FILLET2_R * 0.02, -FILLET2_R * 0.02))
            Line((-FILLET2_R * 0.02, -FILLET2_R * 0.02), (FILLET2_R, -FILLET2_R * 0.02))
            Line((FILLET2_R, -FILLET2_R * 0.02), (FILLET2_R, 0))
        make_face()
    fillet2_piece_10a = extrude(amount=42, mode=Mode.PRIVATE)
    fillet2_piece_10a = split(fillet2_piece_10a, bisect_by=Plane(origin=(-31.368024429, 68.868024429, -13.5), z_dir=(0, 0, -1)), keep=Keep.TOP, mode=Mode.PRIVATE)
    with BuildSketch(Plane(origin=(-20, 70, -13.5), x_dir=(0, 0, -1), z_dir=(-1, 0, 0))) as fillet2_piece_10b_section:
        with BuildLine():
            CenterArc((FILLET2_R, FILLET2_R), FILLET2_R, 180, 90)
            Line((0, FILLET2_R), (-FILLET2_R * 0.02, FILLET2_R))
            Line((-FILLET2_R * 0.02, FILLET2_R), (-FILLET2_R * 0.02, -FILLET2_R * 0.02))
            Line((-FILLET2_R * 0.02, -FILLET2_R * 0.02), (FILLET2_R, -FILLET2_R * 0.02))
            Line((FILLET2_R, -FILLET2_R * 0.02), (FILLET2_R, 0))
        make_face()
    fillet2_piece_10b = extrude(amount=22.5, mode=Mode.PRIVATE)
    fillet2_piece_10b = split(fillet2_piece_10b, bisect_by=Plane(origin=(-32.5, 68.868024429, -14.631975571), z_dir=(1, 0, 0)), keep=Keep.TOP, mode=Mode.PRIVATE)
    fillet2_piece_10 = fillet2_piece_10a & fillet2_piece_10b
    add(fillet2_piece_10)
    with BuildSketch(Plane(origin=(-32.5, 70, -13.5), x_dir=(0, 0, -1), z_dir=(-1, 0, 0))) as fillet2_piece_11a_section:
        with BuildLine():
            CenterArc((FILLET2_R, FILLET2_R), FILLET2_R, 180, 90)
            Line((0, FILLET2_R), (-FILLET2_R * 0.02, FILLET2_R))
            Line((-FILLET2_R * 0.02, FILLET2_R), (-FILLET2_R * 0.02, -FILLET2_R * 0.02))
            Line((-FILLET2_R * 0.02, -FILLET2_R * 0.02), (FILLET2_R, -FILLET2_R * 0.02))
            Line((FILLET2_R, -FILLET2_R * 0.02), (FILLET2_R, 0))
        make_face()
    fillet2_piece_11a = extrude(amount=22.5, mode=Mode.PRIVATE)
    fillet2_piece_11a = fillet2_piece_11a & Plane(origin=(0, 68.827329448, 0), x_dir=(0.8541662601625051, 0, 0.5199999999999999), z_dir=(0, -1, 0)) * Cylinder(50, 65, mode=Mode.PRIVATE)
    fillet2_piece_11a = split(fillet2_piece_11a, bisect_by=Plane(origin=(-42.5, 68.827329448, -14.561744488), z_dir=(-1, 0, 0)), keep=Keep.TOP, mode=Mode.PRIVATE)
    with BuildSketch(Plane(origin=(-42.5, 70, -26), x_dir=(-1, 0, 0), z_dir=(0, 0, 1))) as fillet2_piece_11b_section:
        with BuildLine():
            CenterArc((FILLET2_R, FILLET2_R), FILLET2_R, 180, 90)
            Line((0, FILLET2_R), (-FILLET2_R * 0.02, FILLET2_R))
            Line((-FILLET2_R * 0.02, FILLET2_R), (-FILLET2_R * 0.02, -FILLET2_R * 0.02))
            Line((-FILLET2_R * 0.02, -FILLET2_R * 0.02), (FILLET2_R, -FILLET2_R * 0.02))
            Line((FILLET2_R, -FILLET2_R * 0.02), (FILLET2_R, 0))
        make_face()
    fillet2_piece_11b = extrude(amount=52, mode=Mode.PRIVATE)
    fillet2_piece_11b = fillet2_piece_11b & Plane(origin=(0, 68.754666545, 0), x_dir=(0.8541662601625051, 0, 0.5199999999999999), z_dir=(0, -1, 0)) * Cylinder(50, 125, mode=Mode.PRIVATE)
    fillet2_piece_11b = split(fillet2_piece_11b, bisect_by=Plane(origin=(-43.429471079, 68.754666545, -13.5), z_dir=(0, 0, -1)), keep=Keep.TOP, mode=Mode.PRIVATE)
    fillet2_piece_11 = fillet2_piece_11a & fillet2_piece_11b
    add(fillet2_piece_11)

    # CBORE for M4 SHCS2 (through all)
    with Locations(Plane(origin=(0, 0, 16), x_dir=(-1, 0, 0), z_dir=(0, 0, -1))):
        with Locations((0, 55), (0, 15)):
            CounterBoreHole(CBORE_FOR_M4_SHCS2_D / 2, CBORE_FOR_M4_SHCS2_CBORE_D / 2, CBORE_FOR_M4_SHCS2_CBORE_DEPTH)


solid = part.part
